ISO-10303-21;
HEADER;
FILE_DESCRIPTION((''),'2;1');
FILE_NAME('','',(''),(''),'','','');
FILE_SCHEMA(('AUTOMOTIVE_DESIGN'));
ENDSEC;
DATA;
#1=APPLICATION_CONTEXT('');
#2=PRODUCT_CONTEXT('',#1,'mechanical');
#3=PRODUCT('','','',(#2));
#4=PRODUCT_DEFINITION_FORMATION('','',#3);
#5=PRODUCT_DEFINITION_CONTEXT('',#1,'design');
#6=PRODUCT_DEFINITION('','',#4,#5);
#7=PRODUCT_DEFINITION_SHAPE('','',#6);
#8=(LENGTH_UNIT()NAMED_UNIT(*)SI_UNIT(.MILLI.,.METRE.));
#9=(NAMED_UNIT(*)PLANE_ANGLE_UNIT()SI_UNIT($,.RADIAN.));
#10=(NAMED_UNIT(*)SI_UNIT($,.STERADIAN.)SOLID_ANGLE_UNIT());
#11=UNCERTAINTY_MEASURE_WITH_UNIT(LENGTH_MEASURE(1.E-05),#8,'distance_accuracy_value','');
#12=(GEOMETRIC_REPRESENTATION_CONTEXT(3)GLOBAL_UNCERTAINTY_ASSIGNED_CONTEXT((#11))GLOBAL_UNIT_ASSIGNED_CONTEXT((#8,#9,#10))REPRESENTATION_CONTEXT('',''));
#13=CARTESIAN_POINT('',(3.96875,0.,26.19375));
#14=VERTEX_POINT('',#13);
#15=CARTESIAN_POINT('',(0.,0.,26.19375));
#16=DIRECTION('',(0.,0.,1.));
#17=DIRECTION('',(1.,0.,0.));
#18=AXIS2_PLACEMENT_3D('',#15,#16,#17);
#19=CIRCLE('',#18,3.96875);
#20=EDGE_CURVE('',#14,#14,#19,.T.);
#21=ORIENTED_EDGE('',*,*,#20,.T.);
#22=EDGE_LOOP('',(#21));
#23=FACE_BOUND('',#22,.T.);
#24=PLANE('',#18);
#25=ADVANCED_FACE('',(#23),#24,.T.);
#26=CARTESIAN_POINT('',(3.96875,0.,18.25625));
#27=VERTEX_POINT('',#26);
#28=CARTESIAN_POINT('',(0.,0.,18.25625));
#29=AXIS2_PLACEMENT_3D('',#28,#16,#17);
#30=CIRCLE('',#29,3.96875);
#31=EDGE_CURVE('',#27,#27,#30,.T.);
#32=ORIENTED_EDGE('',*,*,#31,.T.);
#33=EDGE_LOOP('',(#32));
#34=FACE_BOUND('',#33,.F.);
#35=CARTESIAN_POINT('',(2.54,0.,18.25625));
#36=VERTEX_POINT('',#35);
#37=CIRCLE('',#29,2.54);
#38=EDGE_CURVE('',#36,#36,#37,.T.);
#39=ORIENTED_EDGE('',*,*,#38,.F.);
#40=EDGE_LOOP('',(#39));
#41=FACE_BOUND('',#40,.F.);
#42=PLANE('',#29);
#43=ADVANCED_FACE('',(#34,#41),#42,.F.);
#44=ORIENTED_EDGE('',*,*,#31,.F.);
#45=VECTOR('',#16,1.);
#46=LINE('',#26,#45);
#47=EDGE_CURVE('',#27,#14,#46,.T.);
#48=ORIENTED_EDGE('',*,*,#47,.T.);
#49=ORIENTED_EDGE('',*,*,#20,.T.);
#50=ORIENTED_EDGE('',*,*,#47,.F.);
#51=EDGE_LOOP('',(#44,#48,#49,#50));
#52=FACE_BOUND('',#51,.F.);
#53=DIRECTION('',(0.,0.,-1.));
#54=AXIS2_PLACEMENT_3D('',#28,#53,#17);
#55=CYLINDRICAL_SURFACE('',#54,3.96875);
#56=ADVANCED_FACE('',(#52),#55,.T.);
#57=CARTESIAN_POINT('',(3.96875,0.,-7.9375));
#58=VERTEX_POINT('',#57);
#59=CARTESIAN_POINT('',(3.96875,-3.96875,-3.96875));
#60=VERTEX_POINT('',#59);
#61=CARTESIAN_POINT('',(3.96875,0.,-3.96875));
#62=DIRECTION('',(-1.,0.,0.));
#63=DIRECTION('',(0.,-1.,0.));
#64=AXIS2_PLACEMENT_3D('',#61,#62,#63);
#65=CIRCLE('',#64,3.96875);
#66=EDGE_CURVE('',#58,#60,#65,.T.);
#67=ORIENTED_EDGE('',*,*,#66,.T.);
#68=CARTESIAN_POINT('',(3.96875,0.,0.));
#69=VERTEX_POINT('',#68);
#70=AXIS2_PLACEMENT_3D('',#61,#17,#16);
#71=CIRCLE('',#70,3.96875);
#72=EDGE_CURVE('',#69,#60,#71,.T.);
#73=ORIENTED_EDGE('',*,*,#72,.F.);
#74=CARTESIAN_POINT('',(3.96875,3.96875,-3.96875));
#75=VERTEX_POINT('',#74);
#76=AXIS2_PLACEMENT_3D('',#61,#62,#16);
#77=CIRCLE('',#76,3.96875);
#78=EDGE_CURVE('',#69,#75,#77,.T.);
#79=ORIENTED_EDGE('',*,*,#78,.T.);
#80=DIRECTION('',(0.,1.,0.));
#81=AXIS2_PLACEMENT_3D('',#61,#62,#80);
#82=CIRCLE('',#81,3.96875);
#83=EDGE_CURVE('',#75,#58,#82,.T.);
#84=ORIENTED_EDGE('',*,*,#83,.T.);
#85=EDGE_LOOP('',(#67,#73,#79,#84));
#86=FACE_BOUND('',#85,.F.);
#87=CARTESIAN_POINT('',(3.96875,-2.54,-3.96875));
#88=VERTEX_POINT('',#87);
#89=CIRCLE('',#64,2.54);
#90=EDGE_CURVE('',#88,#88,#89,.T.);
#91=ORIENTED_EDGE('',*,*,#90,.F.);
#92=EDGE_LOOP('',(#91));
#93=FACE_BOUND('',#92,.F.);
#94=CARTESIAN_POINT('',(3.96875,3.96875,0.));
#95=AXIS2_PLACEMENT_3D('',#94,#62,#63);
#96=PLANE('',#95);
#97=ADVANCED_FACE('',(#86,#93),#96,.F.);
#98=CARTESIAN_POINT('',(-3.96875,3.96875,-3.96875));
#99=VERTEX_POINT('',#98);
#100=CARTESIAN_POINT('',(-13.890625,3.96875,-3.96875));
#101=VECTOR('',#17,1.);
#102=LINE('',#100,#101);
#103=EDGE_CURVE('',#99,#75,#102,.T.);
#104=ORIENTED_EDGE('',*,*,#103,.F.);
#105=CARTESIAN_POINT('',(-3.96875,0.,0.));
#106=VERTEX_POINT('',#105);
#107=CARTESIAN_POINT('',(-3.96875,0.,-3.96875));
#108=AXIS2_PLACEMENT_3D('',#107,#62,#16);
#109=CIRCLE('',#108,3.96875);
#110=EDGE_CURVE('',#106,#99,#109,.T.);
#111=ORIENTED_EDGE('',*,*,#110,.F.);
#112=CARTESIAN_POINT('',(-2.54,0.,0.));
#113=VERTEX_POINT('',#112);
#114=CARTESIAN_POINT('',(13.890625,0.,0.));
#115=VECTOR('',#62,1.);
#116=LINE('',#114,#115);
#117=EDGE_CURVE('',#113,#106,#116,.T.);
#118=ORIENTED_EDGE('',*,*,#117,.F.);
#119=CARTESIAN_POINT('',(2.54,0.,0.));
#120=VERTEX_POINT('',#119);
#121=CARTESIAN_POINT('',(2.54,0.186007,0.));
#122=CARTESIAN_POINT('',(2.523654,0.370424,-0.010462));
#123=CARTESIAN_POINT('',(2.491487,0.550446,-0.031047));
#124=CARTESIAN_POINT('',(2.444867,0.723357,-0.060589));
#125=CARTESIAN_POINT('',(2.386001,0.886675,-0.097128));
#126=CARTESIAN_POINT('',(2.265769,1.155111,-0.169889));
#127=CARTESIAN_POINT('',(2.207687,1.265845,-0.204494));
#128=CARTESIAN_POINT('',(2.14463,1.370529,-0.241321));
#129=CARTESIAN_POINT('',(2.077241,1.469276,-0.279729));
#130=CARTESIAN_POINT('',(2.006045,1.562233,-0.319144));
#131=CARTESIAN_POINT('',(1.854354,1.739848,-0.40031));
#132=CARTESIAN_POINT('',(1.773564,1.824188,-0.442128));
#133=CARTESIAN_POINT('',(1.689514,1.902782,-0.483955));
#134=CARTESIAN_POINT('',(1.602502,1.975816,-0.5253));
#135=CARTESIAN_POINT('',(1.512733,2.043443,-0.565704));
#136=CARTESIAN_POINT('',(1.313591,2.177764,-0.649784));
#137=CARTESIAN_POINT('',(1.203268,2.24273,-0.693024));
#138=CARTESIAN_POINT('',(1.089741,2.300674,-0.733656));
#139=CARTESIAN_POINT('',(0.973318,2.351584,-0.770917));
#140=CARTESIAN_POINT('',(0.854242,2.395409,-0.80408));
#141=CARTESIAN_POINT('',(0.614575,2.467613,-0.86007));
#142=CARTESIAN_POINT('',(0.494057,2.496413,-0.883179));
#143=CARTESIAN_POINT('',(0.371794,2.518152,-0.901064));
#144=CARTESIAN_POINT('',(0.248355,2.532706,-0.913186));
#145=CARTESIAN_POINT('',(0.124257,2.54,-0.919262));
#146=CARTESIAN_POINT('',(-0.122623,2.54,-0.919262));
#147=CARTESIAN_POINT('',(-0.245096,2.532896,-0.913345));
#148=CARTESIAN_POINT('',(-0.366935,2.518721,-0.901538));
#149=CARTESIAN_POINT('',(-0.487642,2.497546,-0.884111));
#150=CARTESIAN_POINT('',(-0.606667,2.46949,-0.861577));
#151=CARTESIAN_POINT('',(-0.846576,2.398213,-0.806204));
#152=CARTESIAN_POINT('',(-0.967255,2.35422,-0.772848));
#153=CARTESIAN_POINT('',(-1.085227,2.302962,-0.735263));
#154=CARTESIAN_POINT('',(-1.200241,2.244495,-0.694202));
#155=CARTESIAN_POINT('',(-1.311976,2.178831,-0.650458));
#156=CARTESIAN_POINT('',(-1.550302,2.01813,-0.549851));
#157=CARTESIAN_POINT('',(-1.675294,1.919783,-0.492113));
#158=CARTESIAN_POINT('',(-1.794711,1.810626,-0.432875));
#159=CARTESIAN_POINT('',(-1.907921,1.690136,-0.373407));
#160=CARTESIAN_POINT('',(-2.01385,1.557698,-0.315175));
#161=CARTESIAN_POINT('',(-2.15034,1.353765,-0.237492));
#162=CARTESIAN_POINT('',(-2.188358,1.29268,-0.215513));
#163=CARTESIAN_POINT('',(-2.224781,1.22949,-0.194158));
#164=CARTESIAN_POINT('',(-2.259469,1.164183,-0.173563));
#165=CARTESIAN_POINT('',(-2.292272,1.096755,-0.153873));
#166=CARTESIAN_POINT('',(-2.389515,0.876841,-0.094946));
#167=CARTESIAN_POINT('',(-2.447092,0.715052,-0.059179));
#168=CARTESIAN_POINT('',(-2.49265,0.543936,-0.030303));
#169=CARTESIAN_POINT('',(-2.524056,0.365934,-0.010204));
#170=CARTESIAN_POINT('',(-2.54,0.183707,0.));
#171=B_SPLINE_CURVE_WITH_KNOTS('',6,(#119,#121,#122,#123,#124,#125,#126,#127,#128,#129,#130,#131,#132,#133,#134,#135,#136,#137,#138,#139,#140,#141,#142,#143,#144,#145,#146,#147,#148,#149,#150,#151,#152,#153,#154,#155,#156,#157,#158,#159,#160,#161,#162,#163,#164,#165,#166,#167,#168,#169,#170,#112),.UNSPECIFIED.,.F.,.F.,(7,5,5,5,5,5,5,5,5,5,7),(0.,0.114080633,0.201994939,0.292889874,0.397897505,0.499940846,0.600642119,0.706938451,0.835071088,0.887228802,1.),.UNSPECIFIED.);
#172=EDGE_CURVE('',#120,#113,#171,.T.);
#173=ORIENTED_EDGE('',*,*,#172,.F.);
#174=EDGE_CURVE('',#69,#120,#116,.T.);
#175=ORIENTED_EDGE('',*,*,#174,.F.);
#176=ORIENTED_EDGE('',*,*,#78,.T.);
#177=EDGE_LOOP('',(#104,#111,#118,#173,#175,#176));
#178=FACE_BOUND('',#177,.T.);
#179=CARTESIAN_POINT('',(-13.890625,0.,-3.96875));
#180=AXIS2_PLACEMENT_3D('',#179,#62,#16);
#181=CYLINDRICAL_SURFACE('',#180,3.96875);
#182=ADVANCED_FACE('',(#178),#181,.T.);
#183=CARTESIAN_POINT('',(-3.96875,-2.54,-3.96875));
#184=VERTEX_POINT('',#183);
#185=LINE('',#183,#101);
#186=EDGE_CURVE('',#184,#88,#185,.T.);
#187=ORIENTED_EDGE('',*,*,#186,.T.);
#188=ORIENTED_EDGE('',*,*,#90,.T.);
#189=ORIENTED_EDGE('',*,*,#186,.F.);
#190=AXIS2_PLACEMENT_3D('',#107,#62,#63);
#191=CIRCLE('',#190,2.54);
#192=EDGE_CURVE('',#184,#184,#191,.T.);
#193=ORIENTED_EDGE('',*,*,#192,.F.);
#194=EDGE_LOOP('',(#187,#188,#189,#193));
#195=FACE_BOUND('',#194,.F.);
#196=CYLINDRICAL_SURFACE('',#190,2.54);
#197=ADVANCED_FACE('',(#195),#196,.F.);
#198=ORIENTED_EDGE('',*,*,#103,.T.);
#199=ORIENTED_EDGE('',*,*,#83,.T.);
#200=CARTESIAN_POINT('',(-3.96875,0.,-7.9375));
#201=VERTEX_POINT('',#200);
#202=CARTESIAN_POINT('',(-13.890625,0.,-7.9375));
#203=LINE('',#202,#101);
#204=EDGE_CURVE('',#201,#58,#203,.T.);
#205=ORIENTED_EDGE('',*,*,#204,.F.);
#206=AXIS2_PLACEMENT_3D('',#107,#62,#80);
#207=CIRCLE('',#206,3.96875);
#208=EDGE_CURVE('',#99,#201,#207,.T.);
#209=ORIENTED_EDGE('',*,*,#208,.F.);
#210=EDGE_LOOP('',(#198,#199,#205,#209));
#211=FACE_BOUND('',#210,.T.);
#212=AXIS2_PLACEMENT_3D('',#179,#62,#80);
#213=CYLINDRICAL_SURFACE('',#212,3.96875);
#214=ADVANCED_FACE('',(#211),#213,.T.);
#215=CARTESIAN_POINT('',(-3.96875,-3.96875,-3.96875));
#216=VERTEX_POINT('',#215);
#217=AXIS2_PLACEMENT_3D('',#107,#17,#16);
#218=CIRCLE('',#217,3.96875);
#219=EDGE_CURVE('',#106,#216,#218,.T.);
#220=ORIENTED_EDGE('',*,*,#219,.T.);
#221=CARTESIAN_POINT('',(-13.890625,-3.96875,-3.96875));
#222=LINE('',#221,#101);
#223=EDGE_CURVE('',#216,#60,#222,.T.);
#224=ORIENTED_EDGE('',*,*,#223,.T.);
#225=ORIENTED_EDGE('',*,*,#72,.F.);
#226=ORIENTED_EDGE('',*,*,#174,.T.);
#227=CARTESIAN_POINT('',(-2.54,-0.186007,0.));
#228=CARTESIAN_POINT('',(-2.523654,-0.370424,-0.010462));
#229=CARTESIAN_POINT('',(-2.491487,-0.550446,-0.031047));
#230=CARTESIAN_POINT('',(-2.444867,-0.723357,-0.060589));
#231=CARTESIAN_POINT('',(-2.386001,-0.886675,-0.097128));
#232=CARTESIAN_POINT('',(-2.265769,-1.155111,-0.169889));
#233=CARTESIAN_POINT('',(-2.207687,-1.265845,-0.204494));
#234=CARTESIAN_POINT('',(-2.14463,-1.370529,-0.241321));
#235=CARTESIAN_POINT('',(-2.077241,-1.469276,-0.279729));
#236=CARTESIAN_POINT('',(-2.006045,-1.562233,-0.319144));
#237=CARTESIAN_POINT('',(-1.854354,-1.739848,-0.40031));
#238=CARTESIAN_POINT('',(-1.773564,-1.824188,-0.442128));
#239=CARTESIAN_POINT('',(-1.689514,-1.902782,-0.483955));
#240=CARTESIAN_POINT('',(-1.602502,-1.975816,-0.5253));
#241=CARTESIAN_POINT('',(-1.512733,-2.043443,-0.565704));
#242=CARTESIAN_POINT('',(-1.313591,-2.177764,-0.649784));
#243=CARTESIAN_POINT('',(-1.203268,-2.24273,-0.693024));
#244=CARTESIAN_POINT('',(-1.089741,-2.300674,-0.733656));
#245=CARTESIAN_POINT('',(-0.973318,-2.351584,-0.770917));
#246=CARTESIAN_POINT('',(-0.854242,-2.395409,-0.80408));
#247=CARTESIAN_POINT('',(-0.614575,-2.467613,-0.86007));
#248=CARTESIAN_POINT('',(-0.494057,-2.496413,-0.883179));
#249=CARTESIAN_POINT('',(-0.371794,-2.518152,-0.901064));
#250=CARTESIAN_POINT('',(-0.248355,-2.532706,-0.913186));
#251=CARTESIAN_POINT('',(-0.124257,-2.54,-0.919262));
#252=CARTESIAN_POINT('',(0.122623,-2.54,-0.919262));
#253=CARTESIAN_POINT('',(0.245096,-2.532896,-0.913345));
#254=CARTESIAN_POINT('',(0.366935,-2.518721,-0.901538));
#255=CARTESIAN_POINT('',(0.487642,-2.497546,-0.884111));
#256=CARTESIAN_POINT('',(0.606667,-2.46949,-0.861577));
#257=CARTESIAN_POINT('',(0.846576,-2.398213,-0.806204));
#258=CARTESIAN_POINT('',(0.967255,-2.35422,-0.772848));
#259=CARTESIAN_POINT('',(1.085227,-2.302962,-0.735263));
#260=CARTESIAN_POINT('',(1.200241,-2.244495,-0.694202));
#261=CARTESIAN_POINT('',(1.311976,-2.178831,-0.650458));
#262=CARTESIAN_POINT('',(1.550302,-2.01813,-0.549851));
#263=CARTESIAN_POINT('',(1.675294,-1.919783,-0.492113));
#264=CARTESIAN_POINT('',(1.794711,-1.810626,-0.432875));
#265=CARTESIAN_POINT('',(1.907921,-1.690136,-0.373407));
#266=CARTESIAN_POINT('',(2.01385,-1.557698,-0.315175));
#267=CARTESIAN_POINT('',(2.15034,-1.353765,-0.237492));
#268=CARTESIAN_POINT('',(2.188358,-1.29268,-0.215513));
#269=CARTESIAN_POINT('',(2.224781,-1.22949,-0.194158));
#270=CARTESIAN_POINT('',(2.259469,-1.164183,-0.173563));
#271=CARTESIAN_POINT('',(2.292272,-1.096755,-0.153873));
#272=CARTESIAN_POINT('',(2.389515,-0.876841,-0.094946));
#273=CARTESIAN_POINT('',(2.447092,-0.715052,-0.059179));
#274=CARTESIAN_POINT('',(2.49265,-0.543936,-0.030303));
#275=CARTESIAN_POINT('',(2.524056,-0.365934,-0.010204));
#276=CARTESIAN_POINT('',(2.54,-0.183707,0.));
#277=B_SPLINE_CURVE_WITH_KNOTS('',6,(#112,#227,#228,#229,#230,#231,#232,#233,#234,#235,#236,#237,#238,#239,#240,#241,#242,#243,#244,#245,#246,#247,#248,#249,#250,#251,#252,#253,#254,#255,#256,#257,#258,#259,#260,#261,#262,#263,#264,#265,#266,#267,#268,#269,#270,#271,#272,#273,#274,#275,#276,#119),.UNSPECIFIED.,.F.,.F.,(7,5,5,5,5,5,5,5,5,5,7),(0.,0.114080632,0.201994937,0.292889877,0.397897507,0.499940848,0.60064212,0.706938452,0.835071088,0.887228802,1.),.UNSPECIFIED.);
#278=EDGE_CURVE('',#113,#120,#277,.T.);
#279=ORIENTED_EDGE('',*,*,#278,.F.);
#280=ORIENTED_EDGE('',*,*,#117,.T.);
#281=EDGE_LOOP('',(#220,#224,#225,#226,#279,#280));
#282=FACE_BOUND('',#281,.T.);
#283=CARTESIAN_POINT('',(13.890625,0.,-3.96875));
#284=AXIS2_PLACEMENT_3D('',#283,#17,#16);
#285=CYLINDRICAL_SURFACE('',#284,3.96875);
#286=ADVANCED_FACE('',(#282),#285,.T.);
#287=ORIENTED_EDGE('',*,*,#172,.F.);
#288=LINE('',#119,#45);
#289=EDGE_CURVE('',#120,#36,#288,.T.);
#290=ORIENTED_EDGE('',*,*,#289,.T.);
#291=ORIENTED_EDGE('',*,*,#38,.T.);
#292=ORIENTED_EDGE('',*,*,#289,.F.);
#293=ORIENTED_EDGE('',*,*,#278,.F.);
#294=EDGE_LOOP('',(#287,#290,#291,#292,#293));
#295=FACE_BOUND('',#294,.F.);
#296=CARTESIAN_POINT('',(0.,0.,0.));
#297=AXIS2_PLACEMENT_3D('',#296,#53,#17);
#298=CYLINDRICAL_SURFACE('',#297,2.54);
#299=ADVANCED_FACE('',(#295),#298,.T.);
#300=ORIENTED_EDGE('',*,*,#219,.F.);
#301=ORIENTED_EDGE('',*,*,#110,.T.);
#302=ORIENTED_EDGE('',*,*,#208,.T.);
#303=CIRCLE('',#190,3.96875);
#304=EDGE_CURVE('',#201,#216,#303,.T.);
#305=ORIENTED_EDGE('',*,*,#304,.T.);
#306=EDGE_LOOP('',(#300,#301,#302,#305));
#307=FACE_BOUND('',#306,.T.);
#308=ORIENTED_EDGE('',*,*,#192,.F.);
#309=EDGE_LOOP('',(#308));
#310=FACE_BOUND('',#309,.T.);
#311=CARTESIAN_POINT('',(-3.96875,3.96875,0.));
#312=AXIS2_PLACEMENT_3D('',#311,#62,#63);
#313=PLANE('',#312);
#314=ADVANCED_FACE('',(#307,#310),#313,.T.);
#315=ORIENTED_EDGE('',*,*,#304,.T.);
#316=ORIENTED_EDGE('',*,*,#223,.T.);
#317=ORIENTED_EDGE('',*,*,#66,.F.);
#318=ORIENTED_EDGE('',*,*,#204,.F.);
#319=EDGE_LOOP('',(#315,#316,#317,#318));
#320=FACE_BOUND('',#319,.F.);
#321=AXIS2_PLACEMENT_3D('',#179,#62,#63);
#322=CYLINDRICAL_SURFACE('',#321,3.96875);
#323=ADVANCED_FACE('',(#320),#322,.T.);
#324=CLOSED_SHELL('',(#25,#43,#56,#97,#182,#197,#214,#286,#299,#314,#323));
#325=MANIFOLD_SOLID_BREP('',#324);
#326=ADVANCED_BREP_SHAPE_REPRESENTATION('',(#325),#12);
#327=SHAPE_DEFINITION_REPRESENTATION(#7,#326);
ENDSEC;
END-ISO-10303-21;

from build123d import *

# Parameters (mm, degrees)
F0_R         = 2.54
F1_DEPTH     = 18.25625
F2_W         = 7.9375
F2_H         = 7.9375
F3_DEPTH     = 7.9375
F4_R         = 3.96875
F5_DEPTH     = 7.9375
F6_T1_DEPTH  = 27.78125
F6_T6_DEPTH  = 27.78125
F6_S7_R      = 2.54
F6_T8_DEPTH  = 16
F6_T12_DEPTH = 27.78125
F6_S13_R     = 2.54
F6_T14_DEPTH = 16
F7_R         = 2.54
F8_DEPTH     = 7.9375


# Not quite as in the source:
# - a fillet or chamfer that OpenCascade refuses, or shapes differently, is made with other operations: its cross-section is extruded or revolved along the edge and cut away or added


with BuildPart() as f1:
    # F0 (on Top) → F1 (new body)
    with BuildSketch(Plane.XY):
        Circle(F0_R)
    extrude(amount=F1_DEPTH)

    # F2 (on face) → F3 (join)
    with BuildSketch(Plane(origin=(0, 0, 0), x_dir=(1, 0, 0), z_dir=(0, 0, -1))):
        Rectangle(F2_W, F2_H)
    extrude(amount=F3_DEPTH)

    # F4 (on face) → F5 (join)
    with BuildSketch(Plane.XY.offset(18.25625)):
        Circle(F4_R)
    extrude(amount=F5_DEPTH)

    # F6: fillet of radius 3.96875 on 4 edges, made by hand

    # F6_s2 → F6_t1 (cut)
    with BuildSketch(Plane.YZ.offset(-13.890625)):
        with BuildLine():
            ThreePointArc((3.96875, -3.96875), (2.8063300378, -6.7750800378), (0, -7.9375))
            Line((0, -7.9375), (3.96875, -7.9375))
            Line((3.96875, -7.9375), (3.96875, -3.96875))
        make_face()
        with BuildLine():
            ThreePointArc((-3.96875, -3.96875), (-2.8063300378, -6.7750800378), (0, -7.9375))
            Line((0, -7.9375), (-3.96875, -7.9375))
            Line((-3.96875, -7.9375), (-3.96875, -3.96875))
        make_face()
    extrude(amount=F6_T1_DEPTH, mode=Mode.SUBTRACT)


with BuildPart() as f6_tool4:
    # F6_s5 → F6_t6 (new body)
    with BuildSketch(Plane.YZ.offset(13.890625)):
        with BuildLine():
            ThreePointArc((0, 0), (-2.8063300378, -1.1624199622), (-3.96875, -3.96875))
            Line((-3.96875, -3.96875), (-3.96875, 0))
            Line((-3.96875, 0), (0, 0))
        make_face()
    extrude(amount=-F6_T6_DEPTH)

    # F6_s7 → F6_t8 (cut, symmetric)
    with BuildSketch(Plane.XY.offset(-2)):
        Circle(F6_S7_R)
    extrude(amount=F6_T8_DEPTH, both=True, mode=Mode.SUBTRACT)


with BuildPart() as f1_1:
    add(f1.part)

    # F6_t3: cut F6_tool4
    add(f6_tool4.part, mode=Mode.SUBTRACT)


with BuildPart() as f6_tool10:
    # F6_s11 → F6_t12 (new body)
    with BuildSketch(Plane.YZ.offset(-13.890625)):
        with BuildLine():
            ThreePointArc((0, 0), (2.8063300378, -1.1624199622), (3.96875, -3.96875))
            Line((3.96875, -3.96875), (3.96875, 0))
            Line((3.96875, 0), (0, 0))
        make_face()
    extrude(amount=F6_T12_DEPTH)

    # F6_s13 → F6_t14 (cut, symmetric)
    with BuildSketch(Plane.XY.offset(-2)):
        Circle(F6_S13_R)
    extrude(amount=F6_T14_DEPTH, both=True, mode=Mode.SUBTRACT)


with BuildPart() as f1_2:
    add(f1_1.part)

    # F6_t9: cut F6_tool10
    add(f6_tool10.part, mode=Mode.SUBTRACT)

    # F7 (on face) → F8 (cut, through all)
    with BuildSketch(Plane(origin=(-3.96875, 0, 0), x_dir=(0, -1, 0), z_dir=(-1, 0, 0))):
        with Locations((0, -3.96875)):
            Circle(F7_R)
    extrude(amount=-F8_DEPTH, mode=Mode.SUBTRACT)


solid = f1_2.part
